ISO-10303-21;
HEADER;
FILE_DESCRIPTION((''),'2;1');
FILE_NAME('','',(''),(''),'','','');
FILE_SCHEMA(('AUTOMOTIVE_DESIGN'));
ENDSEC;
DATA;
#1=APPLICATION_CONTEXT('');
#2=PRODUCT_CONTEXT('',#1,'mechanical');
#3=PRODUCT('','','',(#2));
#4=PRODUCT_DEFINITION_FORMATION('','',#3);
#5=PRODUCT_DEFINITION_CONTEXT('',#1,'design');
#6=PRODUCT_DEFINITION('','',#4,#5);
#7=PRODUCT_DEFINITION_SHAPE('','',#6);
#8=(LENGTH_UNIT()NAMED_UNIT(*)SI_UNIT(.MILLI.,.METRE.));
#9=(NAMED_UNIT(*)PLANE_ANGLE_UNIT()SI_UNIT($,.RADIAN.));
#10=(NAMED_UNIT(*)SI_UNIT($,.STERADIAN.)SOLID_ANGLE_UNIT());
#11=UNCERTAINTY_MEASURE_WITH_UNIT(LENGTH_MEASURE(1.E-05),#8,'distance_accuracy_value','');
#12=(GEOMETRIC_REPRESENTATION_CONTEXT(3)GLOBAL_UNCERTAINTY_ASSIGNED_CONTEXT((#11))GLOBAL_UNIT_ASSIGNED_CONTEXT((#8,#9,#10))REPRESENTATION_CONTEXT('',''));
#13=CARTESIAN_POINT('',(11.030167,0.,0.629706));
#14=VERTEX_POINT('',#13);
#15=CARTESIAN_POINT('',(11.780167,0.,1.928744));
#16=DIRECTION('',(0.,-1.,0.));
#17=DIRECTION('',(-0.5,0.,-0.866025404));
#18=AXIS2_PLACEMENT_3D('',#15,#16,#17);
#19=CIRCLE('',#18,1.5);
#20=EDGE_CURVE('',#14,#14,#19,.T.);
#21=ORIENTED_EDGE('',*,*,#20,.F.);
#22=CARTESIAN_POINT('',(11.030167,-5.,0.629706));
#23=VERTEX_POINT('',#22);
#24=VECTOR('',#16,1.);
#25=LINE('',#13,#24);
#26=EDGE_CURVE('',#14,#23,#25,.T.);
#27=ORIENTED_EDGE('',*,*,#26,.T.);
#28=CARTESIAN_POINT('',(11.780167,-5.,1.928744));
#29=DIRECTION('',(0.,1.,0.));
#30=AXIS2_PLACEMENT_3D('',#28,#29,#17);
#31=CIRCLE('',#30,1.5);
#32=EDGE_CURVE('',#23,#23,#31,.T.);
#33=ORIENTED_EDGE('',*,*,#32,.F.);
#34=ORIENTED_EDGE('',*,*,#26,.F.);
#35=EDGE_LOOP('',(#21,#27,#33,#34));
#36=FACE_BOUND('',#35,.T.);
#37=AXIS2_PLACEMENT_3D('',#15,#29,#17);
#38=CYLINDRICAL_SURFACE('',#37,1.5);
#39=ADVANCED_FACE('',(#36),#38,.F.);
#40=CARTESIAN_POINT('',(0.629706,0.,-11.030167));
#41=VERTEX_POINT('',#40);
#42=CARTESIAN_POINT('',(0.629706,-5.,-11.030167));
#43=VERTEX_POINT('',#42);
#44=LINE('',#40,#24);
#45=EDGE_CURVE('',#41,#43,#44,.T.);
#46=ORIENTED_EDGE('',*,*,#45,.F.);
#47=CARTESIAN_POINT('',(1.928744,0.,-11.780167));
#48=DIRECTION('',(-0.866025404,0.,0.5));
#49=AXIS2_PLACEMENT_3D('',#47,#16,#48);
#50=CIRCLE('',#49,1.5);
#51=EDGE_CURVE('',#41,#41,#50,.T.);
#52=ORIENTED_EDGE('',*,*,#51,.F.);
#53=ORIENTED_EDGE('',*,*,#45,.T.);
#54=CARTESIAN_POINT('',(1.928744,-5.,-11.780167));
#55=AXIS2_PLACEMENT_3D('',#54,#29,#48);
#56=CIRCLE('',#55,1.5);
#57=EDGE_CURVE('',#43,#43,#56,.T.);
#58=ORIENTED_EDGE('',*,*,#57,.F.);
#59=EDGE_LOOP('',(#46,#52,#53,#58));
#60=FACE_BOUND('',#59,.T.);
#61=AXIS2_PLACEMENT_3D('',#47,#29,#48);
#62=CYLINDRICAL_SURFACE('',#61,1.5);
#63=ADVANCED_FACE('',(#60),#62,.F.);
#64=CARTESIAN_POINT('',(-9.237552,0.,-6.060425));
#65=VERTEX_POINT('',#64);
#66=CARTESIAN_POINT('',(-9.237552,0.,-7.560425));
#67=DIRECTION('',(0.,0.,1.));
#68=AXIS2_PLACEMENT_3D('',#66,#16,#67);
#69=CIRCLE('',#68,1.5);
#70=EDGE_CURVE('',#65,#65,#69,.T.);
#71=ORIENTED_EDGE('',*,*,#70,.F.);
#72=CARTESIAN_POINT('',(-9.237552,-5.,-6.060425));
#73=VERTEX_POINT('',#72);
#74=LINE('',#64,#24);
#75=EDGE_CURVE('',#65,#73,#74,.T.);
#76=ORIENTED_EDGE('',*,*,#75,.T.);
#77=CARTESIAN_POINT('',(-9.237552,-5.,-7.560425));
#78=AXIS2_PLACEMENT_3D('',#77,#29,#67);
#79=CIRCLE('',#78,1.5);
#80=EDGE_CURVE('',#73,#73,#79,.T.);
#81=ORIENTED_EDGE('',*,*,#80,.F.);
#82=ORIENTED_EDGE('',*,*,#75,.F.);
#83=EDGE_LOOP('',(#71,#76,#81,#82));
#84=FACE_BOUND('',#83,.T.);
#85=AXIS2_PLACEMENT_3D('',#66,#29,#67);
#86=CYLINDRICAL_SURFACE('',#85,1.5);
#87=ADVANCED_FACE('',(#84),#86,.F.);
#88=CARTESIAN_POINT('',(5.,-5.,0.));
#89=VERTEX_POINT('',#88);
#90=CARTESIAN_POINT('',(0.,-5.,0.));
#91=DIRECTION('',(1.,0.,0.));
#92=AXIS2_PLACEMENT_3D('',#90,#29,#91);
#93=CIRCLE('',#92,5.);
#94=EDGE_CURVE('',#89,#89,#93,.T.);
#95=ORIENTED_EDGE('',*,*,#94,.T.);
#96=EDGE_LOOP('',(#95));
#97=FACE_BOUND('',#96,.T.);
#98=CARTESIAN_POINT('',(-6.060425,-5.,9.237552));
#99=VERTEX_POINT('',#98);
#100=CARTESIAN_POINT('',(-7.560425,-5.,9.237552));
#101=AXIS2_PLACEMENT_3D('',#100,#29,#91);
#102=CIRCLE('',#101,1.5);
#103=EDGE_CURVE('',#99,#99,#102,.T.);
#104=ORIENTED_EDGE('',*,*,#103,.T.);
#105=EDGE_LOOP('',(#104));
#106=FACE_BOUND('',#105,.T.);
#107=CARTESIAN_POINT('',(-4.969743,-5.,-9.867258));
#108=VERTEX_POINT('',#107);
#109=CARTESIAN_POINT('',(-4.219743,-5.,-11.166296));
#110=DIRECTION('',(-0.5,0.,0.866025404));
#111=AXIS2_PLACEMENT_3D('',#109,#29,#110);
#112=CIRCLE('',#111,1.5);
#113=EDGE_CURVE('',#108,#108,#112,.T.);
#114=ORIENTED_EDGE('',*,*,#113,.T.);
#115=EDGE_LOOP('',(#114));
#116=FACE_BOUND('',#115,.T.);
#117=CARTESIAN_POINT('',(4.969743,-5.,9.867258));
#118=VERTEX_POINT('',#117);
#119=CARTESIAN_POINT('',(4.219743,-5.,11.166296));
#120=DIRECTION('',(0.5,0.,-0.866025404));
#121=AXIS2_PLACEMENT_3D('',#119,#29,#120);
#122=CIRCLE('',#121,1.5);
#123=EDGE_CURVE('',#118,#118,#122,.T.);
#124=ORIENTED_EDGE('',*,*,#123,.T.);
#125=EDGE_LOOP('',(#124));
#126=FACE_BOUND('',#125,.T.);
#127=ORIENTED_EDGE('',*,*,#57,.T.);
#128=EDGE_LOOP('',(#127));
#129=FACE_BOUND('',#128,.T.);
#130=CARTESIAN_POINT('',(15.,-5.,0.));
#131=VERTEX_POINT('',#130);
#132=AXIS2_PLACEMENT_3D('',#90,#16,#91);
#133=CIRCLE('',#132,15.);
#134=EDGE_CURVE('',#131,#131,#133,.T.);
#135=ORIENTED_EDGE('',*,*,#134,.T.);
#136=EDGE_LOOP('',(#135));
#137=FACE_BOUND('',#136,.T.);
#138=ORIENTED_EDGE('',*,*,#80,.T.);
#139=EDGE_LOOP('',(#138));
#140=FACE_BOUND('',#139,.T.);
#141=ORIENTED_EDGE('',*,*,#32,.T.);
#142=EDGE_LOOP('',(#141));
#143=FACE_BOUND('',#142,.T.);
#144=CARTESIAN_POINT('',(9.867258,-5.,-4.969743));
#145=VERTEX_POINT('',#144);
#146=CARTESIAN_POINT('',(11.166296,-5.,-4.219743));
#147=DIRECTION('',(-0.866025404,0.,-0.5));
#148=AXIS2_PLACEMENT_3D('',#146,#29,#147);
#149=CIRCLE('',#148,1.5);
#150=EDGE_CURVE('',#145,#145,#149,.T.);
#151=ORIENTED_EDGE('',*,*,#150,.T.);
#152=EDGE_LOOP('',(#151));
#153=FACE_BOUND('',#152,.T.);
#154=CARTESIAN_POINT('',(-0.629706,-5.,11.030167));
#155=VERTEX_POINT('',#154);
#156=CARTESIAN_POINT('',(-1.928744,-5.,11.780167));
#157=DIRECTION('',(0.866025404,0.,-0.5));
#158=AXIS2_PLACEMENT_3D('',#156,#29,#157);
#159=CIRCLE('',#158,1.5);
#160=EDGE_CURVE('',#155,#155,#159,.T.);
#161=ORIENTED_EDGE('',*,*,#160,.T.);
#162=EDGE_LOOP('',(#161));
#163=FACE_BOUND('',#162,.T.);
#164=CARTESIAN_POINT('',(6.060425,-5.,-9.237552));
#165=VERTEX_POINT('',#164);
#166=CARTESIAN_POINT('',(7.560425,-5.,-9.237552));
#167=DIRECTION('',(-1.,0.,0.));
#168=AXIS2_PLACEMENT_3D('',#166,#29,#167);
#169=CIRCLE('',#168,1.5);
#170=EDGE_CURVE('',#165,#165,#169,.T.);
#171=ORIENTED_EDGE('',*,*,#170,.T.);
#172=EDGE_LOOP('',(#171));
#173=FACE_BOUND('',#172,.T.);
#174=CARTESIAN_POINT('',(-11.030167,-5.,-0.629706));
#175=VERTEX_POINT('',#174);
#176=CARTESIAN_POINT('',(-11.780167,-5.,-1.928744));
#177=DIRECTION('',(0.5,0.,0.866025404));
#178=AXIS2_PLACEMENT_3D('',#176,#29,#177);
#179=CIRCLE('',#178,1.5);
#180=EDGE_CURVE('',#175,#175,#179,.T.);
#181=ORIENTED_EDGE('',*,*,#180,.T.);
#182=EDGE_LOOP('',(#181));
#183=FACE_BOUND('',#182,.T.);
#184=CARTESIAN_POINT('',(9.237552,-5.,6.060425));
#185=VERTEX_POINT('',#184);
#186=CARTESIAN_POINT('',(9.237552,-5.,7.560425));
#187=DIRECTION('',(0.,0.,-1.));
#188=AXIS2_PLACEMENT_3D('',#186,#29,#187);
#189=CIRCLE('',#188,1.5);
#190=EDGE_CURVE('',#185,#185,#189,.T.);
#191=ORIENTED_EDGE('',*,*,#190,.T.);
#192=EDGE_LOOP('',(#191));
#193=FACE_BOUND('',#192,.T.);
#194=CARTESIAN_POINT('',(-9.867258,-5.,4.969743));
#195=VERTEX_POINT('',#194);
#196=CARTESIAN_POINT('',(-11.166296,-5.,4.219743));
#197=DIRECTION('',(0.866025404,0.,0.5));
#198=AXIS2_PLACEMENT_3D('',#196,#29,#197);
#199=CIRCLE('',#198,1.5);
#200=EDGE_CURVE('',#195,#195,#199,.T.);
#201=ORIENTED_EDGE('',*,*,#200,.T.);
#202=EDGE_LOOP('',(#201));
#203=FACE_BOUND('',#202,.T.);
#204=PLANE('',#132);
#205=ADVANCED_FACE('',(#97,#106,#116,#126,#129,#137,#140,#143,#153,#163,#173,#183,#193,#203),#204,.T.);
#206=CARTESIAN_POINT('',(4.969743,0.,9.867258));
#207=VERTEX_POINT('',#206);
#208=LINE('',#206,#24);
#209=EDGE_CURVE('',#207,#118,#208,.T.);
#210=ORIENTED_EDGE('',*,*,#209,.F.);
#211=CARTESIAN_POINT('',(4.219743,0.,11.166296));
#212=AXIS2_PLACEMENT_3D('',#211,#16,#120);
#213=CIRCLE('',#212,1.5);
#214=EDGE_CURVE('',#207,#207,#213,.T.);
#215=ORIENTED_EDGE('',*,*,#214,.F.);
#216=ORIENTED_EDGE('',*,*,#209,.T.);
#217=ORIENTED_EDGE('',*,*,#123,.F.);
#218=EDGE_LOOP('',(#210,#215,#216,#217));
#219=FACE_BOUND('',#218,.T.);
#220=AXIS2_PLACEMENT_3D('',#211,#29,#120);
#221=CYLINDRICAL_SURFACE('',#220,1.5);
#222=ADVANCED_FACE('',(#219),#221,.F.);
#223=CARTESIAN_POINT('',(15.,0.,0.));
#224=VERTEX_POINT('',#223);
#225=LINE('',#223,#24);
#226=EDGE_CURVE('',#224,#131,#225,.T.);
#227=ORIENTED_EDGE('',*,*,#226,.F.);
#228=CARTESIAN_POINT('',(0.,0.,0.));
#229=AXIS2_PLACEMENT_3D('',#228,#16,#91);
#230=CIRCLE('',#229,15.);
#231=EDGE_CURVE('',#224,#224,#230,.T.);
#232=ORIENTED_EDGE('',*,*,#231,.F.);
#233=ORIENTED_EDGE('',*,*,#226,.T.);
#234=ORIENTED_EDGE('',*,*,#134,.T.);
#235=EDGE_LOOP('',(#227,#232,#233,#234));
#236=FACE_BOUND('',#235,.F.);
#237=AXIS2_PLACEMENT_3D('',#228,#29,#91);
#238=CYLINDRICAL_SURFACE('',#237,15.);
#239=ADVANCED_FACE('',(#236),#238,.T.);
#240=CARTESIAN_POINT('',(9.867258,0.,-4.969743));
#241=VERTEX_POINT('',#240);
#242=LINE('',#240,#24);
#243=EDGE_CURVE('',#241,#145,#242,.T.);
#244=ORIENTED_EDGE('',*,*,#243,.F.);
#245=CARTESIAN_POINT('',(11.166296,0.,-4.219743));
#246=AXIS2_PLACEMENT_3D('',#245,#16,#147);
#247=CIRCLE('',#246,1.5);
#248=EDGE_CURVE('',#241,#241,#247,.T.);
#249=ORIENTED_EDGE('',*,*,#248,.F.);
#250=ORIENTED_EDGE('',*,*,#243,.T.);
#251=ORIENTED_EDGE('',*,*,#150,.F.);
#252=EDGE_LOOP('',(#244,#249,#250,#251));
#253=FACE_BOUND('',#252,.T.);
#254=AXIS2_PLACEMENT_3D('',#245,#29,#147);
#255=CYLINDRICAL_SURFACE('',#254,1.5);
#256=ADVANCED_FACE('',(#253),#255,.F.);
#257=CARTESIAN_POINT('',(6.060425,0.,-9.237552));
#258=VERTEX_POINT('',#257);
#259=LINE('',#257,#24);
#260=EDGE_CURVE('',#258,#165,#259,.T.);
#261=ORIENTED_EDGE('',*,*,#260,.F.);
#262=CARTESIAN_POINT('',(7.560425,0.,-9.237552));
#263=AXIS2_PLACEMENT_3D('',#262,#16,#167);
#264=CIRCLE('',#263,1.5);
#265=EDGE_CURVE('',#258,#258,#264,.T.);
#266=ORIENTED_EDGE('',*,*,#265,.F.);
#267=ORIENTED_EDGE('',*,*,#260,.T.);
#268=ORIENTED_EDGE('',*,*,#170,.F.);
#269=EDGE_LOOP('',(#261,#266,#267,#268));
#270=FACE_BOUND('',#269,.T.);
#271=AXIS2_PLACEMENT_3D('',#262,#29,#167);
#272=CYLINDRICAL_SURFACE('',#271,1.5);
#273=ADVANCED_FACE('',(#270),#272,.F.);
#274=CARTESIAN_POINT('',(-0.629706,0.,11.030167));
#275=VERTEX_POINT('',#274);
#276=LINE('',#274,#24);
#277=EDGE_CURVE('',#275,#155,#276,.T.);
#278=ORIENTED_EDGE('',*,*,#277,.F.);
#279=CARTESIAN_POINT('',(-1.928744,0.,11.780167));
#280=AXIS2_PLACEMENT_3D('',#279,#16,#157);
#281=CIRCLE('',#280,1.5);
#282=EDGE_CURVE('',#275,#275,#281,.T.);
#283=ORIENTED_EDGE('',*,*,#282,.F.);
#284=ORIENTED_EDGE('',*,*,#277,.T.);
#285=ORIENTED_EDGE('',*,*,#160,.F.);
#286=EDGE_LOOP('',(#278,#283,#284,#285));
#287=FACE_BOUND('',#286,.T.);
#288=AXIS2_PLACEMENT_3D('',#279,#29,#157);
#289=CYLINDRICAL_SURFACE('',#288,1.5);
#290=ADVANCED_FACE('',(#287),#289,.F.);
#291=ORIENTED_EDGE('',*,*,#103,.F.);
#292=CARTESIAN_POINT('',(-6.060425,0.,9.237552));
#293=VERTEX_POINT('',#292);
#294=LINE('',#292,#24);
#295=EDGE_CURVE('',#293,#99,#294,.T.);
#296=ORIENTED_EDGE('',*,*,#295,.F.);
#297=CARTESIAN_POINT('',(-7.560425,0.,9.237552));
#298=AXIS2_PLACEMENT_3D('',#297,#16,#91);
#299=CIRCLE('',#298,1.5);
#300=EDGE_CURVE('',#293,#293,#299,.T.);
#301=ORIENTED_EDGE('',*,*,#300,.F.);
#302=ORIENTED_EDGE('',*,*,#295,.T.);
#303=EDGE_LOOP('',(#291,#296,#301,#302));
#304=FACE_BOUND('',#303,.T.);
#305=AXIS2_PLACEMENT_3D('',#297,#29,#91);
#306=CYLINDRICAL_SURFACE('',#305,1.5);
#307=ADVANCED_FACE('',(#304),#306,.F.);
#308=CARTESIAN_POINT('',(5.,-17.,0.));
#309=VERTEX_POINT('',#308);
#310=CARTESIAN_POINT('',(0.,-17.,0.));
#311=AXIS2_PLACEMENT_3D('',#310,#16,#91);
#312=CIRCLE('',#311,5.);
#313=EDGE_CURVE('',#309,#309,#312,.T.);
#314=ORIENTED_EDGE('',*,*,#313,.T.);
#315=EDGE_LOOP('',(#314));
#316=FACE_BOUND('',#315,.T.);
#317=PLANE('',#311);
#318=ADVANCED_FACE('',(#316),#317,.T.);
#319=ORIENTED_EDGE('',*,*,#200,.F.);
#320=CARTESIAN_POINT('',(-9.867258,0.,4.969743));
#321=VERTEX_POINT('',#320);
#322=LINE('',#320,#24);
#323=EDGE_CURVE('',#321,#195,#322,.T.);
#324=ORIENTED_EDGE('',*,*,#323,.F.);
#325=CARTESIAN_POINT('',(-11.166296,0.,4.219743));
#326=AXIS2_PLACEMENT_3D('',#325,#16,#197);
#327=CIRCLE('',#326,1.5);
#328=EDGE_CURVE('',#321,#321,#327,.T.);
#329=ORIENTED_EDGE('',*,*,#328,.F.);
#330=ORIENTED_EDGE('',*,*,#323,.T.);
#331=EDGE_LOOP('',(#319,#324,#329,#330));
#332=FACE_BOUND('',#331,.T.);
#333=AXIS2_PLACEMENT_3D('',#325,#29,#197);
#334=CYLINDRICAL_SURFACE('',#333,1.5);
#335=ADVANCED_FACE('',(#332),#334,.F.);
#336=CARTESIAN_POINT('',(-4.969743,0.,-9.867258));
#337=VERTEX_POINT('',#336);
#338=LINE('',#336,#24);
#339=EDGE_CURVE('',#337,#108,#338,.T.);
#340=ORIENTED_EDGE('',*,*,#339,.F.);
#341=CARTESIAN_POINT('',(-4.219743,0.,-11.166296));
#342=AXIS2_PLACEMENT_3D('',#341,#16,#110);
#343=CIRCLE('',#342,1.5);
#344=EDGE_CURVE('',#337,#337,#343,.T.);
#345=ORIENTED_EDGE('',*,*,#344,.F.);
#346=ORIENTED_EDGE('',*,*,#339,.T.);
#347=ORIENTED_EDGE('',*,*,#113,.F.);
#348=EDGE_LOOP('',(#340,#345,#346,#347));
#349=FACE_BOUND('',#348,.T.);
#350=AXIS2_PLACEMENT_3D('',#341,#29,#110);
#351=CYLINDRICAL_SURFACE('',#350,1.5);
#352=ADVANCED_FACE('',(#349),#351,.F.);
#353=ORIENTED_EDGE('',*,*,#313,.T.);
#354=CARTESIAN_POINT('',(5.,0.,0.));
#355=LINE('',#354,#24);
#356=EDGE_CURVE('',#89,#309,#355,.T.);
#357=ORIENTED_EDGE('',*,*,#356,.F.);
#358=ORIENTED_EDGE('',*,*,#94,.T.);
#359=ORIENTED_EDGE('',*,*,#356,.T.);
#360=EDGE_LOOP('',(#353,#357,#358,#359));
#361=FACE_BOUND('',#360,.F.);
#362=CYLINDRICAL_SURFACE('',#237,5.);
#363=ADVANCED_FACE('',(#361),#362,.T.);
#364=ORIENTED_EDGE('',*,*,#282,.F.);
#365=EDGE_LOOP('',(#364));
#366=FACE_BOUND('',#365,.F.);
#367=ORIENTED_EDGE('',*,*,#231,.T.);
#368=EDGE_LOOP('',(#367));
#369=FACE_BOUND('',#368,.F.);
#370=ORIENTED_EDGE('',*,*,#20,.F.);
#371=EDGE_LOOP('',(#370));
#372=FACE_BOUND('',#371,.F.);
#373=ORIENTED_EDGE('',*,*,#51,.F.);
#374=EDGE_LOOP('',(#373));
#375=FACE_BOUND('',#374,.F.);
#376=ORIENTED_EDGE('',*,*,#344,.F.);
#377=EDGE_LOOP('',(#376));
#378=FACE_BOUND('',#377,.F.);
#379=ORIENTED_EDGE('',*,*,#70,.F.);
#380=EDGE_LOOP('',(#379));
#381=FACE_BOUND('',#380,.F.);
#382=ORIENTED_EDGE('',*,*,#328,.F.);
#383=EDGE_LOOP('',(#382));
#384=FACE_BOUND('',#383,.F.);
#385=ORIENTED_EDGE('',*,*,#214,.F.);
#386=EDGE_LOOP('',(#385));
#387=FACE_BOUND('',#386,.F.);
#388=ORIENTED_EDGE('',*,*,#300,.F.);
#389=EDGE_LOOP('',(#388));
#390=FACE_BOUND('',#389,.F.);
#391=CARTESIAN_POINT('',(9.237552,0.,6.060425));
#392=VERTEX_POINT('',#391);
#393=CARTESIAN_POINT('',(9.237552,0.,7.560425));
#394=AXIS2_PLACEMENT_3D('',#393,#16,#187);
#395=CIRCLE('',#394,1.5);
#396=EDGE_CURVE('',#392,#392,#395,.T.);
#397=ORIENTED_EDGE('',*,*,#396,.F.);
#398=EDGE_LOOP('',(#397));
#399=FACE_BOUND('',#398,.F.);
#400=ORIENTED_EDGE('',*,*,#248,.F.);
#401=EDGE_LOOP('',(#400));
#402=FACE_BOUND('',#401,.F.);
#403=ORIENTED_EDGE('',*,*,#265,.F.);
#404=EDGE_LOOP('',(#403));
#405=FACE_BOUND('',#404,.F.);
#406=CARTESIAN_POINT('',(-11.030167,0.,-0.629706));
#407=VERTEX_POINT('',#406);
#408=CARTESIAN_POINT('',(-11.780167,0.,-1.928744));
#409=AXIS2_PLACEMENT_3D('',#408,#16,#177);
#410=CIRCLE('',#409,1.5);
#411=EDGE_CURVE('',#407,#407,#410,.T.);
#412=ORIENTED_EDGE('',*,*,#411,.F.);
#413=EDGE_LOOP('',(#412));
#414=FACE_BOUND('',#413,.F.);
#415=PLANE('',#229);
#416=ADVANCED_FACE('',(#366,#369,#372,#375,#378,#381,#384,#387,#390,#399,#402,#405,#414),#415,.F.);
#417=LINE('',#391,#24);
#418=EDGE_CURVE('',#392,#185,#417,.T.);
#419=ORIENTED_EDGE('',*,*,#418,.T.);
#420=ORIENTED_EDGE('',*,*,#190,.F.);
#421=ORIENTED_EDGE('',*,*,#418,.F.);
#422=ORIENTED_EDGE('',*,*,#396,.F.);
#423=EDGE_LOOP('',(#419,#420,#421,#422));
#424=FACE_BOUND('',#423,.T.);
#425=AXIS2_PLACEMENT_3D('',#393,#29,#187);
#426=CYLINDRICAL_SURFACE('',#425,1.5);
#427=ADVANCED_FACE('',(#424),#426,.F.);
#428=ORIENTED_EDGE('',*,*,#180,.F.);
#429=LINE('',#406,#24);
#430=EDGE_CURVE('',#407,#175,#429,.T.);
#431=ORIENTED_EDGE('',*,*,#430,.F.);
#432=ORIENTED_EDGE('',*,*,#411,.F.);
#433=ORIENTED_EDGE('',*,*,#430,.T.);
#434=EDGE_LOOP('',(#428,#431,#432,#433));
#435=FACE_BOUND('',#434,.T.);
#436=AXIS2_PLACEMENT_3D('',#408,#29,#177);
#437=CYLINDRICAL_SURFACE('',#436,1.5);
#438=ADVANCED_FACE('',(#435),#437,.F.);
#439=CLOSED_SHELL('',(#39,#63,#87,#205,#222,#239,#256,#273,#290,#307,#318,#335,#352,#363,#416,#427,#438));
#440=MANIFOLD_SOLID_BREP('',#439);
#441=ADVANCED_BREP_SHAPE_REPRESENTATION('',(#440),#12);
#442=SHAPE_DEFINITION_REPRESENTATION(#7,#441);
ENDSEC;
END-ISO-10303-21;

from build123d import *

# Parameters (mm, degrees)
F0_R            = 15
F2_DEPTH        = 5
F1_R            = 1.5
F3_DEPTH        = 6
F3_COPIES_COUNT = 12
F4_R            = 5
F5_DEPTH        = 17


# Not quite as in the source:
# - a pattern or mirror of a feature is missing from the dataset's text; its kind, count and spacing are read off the source's solid


with BuildPart() as f2:
    # F0 (on Front) → F2 (new body)
    with BuildSketch(Plane.XZ):
        Circle(F0_R)
    extrude(amount=F2_DEPTH)

    # F1 (on face) → F3 (cut)
    with BuildSketch(Plane.XZ):
        with Locations((-7.5604245067, 9.2375520617)):
            Circle(F1_R)
    f3 = extrude(amount=F3_DEPTH, mode=Mode.SUBTRACT)

    # F3_copies: F3 ×12 about axis
    f3_copies_axis = Axis((0, 0, 0), (0, 1, 0))
    for i in range(1, F3_COPIES_COUNT):
        add(f3.rotate(f3_copies_axis, i * 360 / F3_COPIES_COUNT), mode=Mode.SUBTRACT)

    # F4 (on face) → F5 (join)
    with BuildSketch(Plane.XZ):
        Circle(F4_R)
    extrude(amount=F5_DEPTH)


solid = f2.part
